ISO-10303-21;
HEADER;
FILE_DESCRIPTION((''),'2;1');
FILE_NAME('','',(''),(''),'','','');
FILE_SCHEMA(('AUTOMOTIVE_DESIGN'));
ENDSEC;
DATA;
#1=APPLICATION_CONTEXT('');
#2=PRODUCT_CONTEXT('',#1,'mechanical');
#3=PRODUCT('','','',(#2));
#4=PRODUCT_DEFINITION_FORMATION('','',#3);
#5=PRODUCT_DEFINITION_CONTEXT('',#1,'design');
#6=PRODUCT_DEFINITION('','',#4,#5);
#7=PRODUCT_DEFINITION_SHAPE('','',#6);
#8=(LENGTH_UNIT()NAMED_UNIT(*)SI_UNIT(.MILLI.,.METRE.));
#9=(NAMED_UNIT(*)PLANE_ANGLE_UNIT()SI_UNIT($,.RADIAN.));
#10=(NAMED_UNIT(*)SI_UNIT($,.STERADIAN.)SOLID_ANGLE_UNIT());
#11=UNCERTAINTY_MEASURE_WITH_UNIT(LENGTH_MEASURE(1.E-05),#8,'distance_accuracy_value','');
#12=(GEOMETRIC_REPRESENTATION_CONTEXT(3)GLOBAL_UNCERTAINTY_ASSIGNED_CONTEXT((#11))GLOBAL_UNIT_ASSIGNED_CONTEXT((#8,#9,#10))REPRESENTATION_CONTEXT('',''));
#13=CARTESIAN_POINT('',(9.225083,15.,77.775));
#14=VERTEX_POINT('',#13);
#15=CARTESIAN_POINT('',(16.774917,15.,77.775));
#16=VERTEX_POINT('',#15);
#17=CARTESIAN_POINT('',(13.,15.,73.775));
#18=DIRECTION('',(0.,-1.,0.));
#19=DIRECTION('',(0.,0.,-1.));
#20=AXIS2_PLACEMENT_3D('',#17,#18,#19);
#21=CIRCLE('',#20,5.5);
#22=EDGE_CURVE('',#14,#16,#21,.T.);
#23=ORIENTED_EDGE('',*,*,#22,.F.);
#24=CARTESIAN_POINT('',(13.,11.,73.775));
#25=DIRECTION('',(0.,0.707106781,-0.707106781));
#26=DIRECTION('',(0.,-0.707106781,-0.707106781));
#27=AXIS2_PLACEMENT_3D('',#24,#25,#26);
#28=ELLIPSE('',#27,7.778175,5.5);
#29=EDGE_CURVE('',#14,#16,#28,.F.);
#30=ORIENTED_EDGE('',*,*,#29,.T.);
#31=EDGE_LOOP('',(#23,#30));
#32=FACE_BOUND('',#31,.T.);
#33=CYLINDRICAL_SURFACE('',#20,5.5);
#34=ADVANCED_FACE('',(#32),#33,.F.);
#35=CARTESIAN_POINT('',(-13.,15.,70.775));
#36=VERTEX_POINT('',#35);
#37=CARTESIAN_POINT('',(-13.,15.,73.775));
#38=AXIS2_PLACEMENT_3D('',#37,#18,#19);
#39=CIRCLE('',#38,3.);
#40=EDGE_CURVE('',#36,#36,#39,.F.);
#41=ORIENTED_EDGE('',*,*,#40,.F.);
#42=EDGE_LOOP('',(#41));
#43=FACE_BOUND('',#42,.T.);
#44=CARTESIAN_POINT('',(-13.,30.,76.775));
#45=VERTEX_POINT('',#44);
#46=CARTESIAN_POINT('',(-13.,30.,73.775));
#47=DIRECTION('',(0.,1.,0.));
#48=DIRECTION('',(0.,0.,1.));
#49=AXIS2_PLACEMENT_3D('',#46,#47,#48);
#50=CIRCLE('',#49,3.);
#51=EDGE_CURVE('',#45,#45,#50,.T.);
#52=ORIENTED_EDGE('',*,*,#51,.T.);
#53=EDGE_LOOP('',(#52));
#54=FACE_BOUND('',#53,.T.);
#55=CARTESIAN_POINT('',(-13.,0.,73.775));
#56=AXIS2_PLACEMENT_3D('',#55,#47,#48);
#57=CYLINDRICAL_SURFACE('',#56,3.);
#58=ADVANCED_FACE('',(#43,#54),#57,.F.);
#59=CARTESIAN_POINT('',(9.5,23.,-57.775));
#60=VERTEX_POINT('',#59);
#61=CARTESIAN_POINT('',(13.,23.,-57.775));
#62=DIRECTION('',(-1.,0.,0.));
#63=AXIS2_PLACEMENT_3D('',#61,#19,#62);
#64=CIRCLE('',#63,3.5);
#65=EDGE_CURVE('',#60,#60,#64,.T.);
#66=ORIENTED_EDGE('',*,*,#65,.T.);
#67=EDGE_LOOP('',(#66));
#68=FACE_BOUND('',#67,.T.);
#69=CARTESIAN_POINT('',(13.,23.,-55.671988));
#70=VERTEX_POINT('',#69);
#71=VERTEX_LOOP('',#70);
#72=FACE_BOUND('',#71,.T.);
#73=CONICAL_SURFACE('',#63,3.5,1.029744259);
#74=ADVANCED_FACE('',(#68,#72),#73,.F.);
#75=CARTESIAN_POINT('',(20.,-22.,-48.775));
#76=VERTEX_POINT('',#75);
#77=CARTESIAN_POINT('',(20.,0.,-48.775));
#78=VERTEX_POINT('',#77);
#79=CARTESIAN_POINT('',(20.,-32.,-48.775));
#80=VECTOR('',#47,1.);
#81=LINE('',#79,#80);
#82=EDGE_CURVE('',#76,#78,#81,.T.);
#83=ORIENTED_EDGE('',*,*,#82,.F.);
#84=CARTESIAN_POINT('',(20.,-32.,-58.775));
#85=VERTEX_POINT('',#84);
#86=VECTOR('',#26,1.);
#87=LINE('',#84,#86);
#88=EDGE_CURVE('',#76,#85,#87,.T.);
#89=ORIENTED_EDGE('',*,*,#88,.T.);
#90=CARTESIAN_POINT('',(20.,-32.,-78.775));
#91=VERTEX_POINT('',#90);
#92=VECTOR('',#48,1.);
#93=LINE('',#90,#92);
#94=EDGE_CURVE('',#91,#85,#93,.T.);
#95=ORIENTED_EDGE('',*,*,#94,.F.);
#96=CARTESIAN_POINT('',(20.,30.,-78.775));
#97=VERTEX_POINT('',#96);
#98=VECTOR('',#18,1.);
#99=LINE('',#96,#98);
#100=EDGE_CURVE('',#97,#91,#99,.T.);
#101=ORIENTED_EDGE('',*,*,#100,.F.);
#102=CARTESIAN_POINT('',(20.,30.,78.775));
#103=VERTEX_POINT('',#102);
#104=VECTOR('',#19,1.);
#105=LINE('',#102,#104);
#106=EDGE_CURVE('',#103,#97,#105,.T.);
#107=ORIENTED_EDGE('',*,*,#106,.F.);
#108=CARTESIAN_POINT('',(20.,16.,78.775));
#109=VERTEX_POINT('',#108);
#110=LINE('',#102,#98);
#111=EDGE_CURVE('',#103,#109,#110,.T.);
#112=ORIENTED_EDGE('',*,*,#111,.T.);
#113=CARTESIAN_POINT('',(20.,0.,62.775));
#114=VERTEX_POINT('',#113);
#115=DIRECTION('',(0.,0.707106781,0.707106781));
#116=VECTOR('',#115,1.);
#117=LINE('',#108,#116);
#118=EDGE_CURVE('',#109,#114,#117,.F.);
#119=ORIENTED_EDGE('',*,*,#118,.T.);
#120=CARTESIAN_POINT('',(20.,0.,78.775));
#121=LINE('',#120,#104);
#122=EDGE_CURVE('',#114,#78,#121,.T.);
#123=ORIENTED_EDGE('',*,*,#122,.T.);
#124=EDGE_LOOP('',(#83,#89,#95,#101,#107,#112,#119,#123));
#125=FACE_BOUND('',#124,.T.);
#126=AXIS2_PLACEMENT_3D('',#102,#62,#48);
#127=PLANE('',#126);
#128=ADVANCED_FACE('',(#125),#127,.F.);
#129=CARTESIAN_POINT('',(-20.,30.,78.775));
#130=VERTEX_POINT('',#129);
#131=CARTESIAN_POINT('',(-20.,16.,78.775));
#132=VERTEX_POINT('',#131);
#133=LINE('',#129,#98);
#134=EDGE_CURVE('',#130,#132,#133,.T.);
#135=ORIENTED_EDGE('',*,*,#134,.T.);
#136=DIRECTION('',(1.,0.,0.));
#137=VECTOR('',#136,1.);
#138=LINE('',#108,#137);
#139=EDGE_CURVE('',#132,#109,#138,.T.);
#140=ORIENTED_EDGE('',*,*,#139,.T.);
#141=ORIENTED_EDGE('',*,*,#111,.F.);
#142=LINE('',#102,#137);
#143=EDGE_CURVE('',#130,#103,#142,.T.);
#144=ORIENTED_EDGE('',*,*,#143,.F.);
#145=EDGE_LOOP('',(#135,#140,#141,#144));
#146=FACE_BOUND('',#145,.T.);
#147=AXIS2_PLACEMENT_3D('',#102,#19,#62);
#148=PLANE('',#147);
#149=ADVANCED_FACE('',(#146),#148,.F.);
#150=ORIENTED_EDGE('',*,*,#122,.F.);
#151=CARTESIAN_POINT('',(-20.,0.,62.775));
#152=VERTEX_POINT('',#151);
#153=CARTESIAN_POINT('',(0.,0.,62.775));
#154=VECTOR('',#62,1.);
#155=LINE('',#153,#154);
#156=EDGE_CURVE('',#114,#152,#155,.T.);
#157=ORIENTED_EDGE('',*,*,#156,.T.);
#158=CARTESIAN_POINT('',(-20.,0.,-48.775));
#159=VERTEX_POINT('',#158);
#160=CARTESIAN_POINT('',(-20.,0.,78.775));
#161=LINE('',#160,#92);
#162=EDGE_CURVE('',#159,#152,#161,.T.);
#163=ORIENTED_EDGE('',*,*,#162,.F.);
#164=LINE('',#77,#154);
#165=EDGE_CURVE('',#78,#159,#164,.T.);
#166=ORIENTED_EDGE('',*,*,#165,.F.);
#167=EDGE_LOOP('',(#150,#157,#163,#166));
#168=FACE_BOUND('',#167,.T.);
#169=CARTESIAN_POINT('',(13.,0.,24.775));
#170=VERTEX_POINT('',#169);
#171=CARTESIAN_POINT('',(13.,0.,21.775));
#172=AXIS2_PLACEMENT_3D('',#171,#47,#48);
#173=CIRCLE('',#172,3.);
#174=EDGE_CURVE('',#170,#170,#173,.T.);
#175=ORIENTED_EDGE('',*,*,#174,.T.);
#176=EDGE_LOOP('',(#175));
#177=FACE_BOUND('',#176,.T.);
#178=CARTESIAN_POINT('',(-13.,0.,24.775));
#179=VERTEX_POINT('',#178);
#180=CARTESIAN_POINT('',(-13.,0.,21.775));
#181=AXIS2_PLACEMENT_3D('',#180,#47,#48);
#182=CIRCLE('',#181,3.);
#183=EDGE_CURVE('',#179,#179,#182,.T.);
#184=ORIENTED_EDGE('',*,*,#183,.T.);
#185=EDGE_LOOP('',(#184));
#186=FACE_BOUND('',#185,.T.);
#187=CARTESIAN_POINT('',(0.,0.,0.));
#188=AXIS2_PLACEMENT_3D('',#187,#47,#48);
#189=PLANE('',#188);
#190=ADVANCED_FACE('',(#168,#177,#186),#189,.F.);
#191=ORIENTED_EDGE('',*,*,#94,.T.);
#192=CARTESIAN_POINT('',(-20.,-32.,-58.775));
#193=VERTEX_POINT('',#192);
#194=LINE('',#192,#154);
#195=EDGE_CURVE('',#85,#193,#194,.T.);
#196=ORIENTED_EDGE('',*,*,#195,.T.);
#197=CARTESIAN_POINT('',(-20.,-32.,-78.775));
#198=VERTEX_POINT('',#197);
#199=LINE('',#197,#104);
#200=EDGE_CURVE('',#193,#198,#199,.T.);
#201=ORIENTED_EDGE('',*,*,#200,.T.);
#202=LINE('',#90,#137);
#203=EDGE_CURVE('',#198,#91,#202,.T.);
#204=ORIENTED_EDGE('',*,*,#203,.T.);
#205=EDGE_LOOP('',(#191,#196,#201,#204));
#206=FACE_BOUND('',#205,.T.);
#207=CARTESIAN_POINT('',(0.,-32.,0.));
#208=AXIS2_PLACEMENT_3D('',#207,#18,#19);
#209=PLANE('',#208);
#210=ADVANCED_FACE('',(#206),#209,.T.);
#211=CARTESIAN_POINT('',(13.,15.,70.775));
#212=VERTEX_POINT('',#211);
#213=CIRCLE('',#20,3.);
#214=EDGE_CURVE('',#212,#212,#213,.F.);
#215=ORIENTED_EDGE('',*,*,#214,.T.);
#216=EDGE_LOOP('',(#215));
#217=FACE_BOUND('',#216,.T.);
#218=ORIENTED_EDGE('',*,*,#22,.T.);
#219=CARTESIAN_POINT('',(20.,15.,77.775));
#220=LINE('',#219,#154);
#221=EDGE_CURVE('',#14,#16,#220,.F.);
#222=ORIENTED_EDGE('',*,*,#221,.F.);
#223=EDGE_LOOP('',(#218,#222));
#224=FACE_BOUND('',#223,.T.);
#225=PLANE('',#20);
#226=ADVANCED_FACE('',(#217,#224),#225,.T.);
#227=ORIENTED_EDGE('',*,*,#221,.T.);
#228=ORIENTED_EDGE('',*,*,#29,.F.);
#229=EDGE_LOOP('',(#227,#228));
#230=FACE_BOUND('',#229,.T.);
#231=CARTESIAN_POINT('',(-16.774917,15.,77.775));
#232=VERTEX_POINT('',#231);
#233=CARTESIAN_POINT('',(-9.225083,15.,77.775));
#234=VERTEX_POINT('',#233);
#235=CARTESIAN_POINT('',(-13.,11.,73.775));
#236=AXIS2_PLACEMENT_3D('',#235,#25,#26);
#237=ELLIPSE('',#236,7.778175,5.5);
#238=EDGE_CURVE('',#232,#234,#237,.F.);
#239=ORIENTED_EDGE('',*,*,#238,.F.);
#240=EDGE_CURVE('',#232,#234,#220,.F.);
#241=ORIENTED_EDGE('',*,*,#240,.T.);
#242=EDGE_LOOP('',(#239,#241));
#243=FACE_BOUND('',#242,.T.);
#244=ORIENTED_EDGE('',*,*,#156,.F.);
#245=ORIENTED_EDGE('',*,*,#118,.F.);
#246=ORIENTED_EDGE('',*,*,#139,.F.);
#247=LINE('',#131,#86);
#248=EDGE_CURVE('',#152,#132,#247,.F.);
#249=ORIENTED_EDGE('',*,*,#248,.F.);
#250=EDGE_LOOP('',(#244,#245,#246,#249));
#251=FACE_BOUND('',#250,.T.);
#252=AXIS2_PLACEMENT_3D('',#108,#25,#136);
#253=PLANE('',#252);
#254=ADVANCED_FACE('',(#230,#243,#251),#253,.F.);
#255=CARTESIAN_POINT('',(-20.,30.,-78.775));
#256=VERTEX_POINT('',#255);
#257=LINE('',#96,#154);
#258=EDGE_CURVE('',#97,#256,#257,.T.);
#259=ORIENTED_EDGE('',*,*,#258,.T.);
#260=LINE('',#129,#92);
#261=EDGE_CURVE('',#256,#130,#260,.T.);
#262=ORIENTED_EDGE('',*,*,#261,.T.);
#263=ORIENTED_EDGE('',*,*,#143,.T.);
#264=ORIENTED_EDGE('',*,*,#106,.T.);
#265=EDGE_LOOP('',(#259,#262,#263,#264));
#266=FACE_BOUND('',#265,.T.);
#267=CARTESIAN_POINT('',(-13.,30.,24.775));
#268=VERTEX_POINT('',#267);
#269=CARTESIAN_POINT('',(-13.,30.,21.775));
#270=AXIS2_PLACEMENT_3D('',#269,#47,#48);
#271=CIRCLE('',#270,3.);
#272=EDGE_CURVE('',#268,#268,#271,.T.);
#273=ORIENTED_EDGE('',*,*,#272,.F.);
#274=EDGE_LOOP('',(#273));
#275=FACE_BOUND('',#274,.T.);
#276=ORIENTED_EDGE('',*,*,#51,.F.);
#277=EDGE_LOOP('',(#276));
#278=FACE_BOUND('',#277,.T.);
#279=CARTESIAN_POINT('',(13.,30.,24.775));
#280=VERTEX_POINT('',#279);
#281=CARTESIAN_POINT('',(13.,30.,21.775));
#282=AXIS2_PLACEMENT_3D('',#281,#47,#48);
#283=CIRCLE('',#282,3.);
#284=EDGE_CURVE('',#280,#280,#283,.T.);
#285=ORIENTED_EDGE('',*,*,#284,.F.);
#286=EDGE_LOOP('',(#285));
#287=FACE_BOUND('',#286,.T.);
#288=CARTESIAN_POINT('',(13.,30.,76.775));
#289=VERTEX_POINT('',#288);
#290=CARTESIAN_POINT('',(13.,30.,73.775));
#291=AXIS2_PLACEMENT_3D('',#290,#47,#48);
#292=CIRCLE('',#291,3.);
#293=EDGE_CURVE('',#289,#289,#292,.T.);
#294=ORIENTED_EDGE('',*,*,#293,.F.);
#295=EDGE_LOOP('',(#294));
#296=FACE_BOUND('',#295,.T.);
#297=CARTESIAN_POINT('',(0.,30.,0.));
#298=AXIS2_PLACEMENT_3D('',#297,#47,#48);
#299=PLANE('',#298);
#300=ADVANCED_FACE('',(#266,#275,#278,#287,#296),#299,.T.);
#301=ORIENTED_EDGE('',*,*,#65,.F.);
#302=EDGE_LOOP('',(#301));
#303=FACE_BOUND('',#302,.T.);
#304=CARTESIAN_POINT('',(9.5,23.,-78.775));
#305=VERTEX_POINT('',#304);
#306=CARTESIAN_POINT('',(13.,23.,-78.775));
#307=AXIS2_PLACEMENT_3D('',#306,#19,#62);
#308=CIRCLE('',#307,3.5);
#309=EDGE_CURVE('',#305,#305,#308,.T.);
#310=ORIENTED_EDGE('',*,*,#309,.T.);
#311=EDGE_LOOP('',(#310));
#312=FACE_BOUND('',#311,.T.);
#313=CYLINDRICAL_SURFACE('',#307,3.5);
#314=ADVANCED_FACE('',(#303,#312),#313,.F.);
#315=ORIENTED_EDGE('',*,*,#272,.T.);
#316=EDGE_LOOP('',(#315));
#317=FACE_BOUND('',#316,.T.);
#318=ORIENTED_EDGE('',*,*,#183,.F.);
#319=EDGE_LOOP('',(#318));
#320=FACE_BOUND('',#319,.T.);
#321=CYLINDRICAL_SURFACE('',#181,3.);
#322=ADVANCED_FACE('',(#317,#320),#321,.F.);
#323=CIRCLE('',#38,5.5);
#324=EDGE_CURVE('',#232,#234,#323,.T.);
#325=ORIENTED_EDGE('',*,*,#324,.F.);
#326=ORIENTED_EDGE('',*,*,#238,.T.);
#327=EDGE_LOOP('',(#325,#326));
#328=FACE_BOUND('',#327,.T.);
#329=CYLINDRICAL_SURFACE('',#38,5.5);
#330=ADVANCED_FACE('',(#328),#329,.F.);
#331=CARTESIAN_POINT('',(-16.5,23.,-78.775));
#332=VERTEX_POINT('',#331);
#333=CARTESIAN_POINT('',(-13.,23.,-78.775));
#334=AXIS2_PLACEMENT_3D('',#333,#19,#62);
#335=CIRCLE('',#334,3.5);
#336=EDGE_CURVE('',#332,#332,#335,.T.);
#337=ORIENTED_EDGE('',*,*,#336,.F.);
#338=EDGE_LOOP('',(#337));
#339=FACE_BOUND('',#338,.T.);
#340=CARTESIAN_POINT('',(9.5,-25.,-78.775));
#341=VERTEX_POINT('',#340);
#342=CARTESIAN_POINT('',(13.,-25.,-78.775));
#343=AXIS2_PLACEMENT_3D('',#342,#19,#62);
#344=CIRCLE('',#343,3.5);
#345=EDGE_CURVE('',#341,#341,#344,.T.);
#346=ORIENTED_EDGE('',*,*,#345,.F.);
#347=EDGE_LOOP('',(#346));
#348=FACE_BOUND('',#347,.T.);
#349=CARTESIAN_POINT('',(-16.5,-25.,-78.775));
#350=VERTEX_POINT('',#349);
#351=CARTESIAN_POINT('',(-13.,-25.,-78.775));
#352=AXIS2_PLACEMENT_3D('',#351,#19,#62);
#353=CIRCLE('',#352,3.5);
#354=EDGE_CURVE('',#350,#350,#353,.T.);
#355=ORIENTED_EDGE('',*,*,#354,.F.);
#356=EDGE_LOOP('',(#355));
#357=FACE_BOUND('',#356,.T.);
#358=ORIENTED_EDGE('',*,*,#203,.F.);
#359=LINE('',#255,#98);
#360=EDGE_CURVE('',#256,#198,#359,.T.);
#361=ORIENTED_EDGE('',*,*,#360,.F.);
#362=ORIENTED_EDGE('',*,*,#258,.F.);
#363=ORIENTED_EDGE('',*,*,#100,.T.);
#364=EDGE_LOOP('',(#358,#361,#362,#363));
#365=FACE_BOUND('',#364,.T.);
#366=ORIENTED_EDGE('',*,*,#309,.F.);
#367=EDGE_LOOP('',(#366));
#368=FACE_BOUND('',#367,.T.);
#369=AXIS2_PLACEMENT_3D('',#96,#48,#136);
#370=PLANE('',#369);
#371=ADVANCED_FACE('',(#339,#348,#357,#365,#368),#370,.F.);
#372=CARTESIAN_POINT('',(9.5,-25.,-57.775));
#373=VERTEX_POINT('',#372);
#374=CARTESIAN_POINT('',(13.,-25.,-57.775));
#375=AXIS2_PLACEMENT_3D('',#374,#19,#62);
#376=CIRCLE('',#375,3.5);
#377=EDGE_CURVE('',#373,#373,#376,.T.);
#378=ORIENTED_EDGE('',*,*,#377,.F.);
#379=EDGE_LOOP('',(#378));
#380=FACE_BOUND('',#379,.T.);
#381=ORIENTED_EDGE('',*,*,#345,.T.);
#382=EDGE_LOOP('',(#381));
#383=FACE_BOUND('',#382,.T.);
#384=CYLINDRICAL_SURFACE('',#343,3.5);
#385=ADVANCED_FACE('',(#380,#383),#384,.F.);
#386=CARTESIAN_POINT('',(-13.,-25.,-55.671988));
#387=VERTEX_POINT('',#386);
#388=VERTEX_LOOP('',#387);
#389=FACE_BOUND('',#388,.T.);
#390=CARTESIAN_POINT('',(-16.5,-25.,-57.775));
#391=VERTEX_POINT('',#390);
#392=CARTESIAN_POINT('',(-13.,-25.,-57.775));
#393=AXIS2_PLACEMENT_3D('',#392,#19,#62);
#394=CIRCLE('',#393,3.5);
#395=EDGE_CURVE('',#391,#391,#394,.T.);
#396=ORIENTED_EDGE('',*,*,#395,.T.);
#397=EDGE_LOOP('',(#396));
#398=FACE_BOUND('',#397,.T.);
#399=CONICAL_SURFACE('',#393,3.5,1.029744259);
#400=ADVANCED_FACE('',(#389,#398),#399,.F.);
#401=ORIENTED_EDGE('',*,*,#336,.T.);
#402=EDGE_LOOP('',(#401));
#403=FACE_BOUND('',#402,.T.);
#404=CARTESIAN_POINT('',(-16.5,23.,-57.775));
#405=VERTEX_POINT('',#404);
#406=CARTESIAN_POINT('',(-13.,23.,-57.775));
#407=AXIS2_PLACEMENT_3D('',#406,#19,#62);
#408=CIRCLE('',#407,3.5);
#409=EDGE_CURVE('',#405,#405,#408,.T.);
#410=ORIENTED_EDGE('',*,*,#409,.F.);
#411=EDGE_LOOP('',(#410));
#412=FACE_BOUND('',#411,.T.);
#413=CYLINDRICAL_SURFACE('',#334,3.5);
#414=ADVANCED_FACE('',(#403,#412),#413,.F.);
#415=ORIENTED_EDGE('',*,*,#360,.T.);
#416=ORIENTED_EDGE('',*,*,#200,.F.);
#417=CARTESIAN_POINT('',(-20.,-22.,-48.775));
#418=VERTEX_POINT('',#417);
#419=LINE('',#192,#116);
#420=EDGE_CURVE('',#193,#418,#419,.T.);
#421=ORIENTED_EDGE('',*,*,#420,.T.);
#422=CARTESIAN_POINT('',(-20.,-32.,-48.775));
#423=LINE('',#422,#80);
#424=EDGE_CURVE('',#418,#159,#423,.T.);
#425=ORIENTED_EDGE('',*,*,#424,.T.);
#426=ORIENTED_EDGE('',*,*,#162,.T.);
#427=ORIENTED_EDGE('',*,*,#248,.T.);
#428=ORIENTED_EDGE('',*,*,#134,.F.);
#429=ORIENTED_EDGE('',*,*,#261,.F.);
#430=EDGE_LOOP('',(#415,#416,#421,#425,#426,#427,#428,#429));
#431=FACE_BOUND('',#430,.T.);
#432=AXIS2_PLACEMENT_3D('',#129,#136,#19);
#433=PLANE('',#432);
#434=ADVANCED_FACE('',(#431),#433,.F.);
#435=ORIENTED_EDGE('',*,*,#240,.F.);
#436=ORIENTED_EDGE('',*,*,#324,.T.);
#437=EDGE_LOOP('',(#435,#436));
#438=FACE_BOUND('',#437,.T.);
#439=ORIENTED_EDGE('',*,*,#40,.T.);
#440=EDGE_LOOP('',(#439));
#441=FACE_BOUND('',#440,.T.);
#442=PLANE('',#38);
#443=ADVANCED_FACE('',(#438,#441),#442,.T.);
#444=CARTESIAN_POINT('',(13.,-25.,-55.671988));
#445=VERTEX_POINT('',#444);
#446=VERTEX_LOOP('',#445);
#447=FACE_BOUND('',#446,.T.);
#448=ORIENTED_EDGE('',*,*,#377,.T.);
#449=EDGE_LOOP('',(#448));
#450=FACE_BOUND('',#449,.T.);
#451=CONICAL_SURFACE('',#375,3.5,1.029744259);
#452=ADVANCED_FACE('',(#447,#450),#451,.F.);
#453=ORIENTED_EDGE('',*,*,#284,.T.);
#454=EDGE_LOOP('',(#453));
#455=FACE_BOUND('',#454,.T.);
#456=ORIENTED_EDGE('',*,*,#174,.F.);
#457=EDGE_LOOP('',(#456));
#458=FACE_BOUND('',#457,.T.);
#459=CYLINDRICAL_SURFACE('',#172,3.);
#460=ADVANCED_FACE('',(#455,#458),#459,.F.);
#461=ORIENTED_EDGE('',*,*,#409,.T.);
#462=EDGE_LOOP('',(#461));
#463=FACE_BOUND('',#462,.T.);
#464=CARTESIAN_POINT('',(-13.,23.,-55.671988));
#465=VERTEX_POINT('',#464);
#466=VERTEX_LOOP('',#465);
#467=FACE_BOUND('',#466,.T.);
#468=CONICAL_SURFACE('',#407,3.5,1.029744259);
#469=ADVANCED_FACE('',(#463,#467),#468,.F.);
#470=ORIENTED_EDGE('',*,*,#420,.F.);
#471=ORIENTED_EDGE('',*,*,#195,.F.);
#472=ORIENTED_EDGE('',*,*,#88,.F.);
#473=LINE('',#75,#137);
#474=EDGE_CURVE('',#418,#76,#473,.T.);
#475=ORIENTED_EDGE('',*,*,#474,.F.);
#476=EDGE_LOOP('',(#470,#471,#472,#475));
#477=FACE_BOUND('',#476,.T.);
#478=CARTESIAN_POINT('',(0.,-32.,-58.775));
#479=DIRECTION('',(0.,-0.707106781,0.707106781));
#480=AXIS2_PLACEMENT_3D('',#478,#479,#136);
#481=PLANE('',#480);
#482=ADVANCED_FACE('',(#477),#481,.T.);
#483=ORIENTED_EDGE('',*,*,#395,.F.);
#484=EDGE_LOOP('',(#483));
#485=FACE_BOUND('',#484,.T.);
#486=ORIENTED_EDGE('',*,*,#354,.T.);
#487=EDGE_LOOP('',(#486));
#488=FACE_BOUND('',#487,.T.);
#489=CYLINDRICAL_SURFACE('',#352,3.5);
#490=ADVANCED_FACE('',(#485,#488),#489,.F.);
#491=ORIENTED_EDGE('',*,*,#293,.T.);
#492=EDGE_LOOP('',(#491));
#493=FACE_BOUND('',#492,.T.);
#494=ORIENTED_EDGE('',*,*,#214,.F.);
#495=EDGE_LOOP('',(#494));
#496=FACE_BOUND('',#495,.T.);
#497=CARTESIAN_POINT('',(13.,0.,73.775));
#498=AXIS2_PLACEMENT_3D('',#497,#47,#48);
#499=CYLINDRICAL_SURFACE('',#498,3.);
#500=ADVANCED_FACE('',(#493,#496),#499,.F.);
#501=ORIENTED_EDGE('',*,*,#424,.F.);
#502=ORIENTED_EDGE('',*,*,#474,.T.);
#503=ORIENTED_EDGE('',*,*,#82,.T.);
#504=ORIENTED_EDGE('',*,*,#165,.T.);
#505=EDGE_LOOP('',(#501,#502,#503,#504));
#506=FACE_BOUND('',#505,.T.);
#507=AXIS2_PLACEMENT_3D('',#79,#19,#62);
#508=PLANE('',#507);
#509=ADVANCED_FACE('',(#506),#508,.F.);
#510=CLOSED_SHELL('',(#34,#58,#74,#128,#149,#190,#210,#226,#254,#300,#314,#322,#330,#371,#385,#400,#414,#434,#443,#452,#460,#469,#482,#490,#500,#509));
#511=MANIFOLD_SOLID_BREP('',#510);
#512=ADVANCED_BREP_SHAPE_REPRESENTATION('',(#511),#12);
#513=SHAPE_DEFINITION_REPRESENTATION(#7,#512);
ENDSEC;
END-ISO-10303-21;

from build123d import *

# Parameters (mm, degrees)
SZKIC1_W                       = 40
SZKIC1_H                       = 157.55
DODANIE_WYCI_GNI_CIE1_DEPTH    = 30
SZKIC2_W                       = 40
SZKIC2_H                       = 30
DODANIE_WYCI_GNI_CIE2_DEPTH    = 32
SZKIC3_R                       = 3
WYTNIJ_WYCI_GNI_CIE1_DEPTH     = 30
SFAZOWANIE1_SIZE               = 16
SZKIC4_R                       = 5.5
WYTNIJ_WYCI_GNI_CIE7_DEPTH     = 15
SFAZOWANIE2_SIZE               = 10
OTW_R_GWINTOWANY_M8X1_01_D     = 7
OTW_R_GWINTOWANY_M8X1_01_DEPTH = 21
OTW_R_GWINTOWANY_M8X1_01_TIP   = 2.103012167


with BuildPart() as part:
    # Szkic1 → Dodanie-wyciągnięcie1 (new body)
    with BuildSketch(Plane(origin=(0, 0, 0), x_dir=(1, 0, 0), z_dir=(0, 1, 0))):
        Rectangle(SZKIC1_W, SZKIC1_H)
    extrude(amount=DODANIE_WYCI_GNI_CIE1_DEPTH)

    # Szkic2 → Dodanie-wyciągnięcie2 (add)
    with BuildSketch(Plane(origin=(0, 0, 0), x_dir=(-1, 0, 0), z_dir=(0, -1, 0))):
        with Locations((0, 63.775)):
            Rectangle(SZKIC2_W, SZKIC2_H)
    extrude(amount=DODANIE_WYCI_GNI_CIE2_DEPTH)

    # Szkic3 → Wytnij-wyciągnięcie1 (cut)
    with BuildSketch(Plane(origin=(0, 30, 0), x_dir=(1, 0, 0), z_dir=(0, 1, 0))):
        with Locations(Location((-13, -73.775, 0), (0, 0, 270))):
            Circle(SZKIC3_R)
        with Locations(Location((13, -73.775, 0), (0, 0, 270))):
            Circle(SZKIC3_R)
        with Locations(Location((13, -21.775, 0), (0, 0, 270))):
            Circle(SZKIC3_R)
        with Locations(Location((-13, -21.775, 0), (0, 0, 270))):
            Circle(SZKIC3_R)
    extrude(amount=-WYTNIJ_WYCI_GNI_CIE1_DEPTH, mode=Mode.SUBTRACT)

    # Sfazowanie1
    # the kernel refuses this chamfer: 16 mm, written as the material it takes off along each edge
    with BuildSketch(Plane(origin=(61.146927807, 0, 78.775), x_dir=(0, 0.9996219169112968, 0.027495876610586494), z_dir=(-1, 0, 0))) as sfazowanie1_piece_1:
        Polygon((SFAZOWANIE1_SIZE * 0.999621916911, SFAZOWANIE1_SIZE * 0.0274958766106), (-SFAZOWANIE1_SIZE * 0.0274958766106, SFAZOWANIE1_SIZE * 0.999621916911), (0, 0), align=None)
    extrude(amount=122.293855615, mode=Mode.SUBTRACT)

    # Szkic4 → Wytnij-wyciągnięcie7 (cut)
    with BuildSketch(Plane.XZ):
        with Locations((13, 73.775)):
            Circle(SZKIC4_R)
        with Locations((-13, 73.775)):
            Circle(SZKIC4_R)
    extrude(amount=-WYTNIJ_WYCI_GNI_CIE7_DEPTH, mode=Mode.SUBTRACT)

    # Sfazowanie2
    sfazowanie2_edges = [part.edges().sort_by_distance(p)[0] for p in [
        (0, -32, -48.775),
    ]]
    chamfer(sfazowanie2_edges, length=SFAZOWANIE2_SIZE)

    # Otwór gwintowany M8x1.01
    with Locations(Plane(origin=(0, 0, -78.775), x_dir=(-1, 0, 0), z_dir=(0, 0, -1))):
        with Locations((-13, -25), (-13, 23), (13, 23), (13, -25)):
            Hole(OTW_R_GWINTOWANY_M8X1_01_D / 2, depth=OTW_R_GWINTOWANY_M8X1_01_DEPTH)
            with Locations((0, 0, -(OTW_R_GWINTOWANY_M8X1_01_DEPTH + OTW_R_GWINTOWANY_M8X1_01_TIP / 2))):  # 118° drill point
                Cone(0, OTW_R_GWINTOWANY_M8X1_01_D / 2, OTW_R_GWINTOWANY_M8X1_01_TIP, mode=Mode.SUBTRACT)


solid = part.part
